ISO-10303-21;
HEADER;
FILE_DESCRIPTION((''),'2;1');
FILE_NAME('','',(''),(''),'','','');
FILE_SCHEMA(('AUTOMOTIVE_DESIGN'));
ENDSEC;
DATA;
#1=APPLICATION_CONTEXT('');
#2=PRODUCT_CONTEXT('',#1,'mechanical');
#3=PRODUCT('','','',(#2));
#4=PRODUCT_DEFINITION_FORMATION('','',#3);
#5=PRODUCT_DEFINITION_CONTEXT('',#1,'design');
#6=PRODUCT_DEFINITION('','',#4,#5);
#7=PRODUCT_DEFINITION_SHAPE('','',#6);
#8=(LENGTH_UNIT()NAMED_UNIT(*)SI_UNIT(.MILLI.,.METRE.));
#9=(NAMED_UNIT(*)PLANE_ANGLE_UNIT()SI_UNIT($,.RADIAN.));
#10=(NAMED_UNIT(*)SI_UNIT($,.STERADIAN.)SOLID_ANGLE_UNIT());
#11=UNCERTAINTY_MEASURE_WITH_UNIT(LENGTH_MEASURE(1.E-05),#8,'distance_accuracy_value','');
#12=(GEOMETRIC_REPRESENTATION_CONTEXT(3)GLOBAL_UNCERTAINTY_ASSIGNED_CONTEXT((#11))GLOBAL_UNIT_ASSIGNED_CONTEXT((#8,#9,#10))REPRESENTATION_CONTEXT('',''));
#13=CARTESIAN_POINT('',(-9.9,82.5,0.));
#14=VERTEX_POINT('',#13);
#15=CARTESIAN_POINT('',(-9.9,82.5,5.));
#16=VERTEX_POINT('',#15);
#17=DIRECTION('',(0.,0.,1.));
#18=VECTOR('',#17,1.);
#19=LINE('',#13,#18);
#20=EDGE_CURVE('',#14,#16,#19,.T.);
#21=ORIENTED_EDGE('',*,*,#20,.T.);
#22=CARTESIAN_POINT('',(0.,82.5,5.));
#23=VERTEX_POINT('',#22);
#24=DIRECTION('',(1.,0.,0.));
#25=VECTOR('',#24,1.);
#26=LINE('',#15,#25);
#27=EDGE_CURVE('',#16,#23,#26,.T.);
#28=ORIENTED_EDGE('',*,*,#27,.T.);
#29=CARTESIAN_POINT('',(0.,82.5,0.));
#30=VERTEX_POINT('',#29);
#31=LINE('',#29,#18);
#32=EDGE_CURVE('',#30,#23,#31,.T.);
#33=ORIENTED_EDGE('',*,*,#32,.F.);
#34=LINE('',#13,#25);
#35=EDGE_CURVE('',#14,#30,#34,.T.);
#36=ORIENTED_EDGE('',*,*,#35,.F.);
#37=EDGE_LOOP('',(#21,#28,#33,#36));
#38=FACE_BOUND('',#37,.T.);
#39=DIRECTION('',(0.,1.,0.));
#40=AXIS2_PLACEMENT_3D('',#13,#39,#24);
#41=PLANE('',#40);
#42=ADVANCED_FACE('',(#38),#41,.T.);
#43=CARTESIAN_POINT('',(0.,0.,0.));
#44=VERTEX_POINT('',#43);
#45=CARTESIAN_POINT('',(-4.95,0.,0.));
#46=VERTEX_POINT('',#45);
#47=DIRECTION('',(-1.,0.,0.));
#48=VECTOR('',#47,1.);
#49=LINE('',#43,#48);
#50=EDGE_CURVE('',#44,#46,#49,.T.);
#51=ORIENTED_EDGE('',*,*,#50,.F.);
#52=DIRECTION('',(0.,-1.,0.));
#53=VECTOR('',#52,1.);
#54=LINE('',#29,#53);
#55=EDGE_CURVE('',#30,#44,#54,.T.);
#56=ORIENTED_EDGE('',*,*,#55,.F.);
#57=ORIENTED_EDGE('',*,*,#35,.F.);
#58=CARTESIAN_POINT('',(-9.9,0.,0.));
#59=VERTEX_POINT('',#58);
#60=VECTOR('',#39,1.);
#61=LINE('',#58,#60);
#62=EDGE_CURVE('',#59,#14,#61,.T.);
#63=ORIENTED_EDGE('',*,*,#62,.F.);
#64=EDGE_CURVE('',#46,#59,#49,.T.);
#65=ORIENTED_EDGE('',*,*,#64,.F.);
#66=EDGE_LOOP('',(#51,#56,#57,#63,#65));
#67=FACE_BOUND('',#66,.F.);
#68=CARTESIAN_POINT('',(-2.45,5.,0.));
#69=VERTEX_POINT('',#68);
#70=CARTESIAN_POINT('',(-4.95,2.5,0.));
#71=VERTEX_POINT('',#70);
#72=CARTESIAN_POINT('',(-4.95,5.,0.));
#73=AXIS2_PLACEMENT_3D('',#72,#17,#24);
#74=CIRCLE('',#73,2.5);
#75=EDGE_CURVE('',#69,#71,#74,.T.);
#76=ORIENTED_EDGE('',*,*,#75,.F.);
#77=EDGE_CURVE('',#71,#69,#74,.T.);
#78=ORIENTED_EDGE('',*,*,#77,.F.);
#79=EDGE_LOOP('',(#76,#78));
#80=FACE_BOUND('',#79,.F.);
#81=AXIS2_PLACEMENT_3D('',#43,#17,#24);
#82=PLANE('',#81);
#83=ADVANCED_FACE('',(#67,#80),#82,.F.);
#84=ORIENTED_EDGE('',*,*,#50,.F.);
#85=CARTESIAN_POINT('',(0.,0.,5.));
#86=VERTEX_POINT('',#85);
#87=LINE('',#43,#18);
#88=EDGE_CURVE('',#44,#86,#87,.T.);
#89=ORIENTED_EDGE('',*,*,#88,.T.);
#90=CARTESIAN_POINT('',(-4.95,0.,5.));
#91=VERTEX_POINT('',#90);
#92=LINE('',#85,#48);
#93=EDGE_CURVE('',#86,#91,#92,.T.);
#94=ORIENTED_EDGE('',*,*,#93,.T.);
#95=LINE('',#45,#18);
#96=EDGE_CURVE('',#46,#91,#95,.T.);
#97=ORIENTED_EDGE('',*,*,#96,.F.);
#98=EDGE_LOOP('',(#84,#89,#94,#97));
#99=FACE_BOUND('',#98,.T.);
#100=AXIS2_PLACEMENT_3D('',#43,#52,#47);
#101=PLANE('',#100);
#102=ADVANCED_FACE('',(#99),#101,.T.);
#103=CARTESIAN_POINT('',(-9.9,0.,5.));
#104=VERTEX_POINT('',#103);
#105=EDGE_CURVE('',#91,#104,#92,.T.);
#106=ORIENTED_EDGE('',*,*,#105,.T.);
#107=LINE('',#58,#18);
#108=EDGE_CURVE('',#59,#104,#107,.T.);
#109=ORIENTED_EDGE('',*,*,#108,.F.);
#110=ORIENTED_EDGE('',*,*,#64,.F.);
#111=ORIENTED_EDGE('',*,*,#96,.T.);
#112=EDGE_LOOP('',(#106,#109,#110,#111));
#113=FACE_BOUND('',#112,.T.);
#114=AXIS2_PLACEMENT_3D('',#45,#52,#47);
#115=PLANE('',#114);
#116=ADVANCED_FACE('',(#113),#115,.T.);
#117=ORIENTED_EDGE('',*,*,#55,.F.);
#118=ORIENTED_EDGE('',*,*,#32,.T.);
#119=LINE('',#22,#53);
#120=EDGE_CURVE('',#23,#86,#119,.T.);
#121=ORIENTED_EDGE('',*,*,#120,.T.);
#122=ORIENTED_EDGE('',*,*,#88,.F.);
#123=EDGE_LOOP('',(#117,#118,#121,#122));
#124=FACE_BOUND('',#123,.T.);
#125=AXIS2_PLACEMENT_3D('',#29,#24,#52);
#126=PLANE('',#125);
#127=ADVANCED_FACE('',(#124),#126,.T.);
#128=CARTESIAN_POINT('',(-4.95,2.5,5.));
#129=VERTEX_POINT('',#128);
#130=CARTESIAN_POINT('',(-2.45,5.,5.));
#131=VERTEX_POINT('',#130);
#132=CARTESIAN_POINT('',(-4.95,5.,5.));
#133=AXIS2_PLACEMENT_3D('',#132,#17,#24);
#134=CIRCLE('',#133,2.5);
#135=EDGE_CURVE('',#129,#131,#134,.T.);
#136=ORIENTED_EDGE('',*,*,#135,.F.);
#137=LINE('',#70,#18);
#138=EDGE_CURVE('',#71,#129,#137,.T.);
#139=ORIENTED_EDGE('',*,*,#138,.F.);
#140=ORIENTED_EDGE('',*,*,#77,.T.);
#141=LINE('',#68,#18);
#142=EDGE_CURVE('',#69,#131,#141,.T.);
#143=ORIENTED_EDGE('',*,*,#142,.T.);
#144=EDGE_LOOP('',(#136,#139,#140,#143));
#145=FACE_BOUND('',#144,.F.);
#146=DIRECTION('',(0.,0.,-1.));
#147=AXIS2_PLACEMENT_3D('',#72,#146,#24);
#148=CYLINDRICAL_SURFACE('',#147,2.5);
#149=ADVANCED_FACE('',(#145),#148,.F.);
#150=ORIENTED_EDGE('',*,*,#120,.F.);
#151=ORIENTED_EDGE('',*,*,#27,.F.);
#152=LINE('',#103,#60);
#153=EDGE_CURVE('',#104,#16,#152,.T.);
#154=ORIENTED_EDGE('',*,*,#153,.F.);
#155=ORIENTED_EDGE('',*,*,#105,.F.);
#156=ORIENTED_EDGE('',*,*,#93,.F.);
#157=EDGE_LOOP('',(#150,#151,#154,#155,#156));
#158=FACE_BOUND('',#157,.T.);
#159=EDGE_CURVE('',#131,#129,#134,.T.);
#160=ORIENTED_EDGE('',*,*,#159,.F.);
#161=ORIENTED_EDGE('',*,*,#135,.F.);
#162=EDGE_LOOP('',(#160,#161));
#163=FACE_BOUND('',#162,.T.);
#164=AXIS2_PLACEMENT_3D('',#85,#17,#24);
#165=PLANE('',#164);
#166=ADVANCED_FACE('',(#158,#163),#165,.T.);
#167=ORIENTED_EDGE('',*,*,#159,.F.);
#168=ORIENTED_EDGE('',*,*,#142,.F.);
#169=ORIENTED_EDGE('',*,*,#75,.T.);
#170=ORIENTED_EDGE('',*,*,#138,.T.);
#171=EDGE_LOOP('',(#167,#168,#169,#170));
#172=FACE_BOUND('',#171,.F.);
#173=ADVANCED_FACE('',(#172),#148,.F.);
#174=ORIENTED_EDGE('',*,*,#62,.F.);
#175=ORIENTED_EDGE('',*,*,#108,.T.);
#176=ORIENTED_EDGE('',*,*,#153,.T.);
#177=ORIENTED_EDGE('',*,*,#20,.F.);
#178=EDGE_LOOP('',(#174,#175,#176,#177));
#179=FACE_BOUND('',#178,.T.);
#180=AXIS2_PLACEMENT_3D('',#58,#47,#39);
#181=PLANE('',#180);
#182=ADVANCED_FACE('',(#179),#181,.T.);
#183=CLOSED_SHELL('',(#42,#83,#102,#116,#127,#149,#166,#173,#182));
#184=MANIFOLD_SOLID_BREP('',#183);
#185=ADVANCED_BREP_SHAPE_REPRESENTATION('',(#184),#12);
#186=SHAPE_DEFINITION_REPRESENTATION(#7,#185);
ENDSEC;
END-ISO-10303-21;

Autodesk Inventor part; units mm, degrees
ref_plane "YZ Plane" through (0, 0, 0) normal (1, 0, 0) x (0, 1, 0)
ref_plane "XZ Plane" through (0, 0, 0) normal (0, 1, 0) x (-1, 0, 0)
ref_plane "XY Plane" through (0, 0, 0) normal (0, 0, 1) x (1, 0, 0)
sketch "Sketch2" plane through (0, 0, 0) normal (0, 0, 1) x (1, 0, 0)
  line L0 (0, 0) -> (-9.9, 0)
  line L1 (-4.95, 0) -> (-4.95, 2.5)
  line L2 (-4.95, 0) -> (-2.45, 0) construction
  circle A0 centre (-4.95, 5) radius 2.5
  line L3 (-4.95, 7.5) -> (32.05, 7.5) construction
  line L4 (0, 0) -> (-9.9, 0)
  line L5 (0, 0) -> (-9.9, 0)
  line L6 (-4.95, 7.5) -> (66.05, 7.5) construction
  line L7 (-4.95, 7.5) -> (70.05, 7.5) construction
  line L8 (0, 0) -> (-9.9, 0)
  line L9 (-9.9, 0) -> (-9.9, 82.5)
  line L10 (-9.9, 82.5) -> (0, 82.5)
  line L11 (0, 82.5) -> (0, 0)
  dimension "d35" = 5
  dimension "d33" = 2.5
  dimension "d34" = 90
  dimension "d48" = 9.9
extrude "Extrusion6" add sketch "Sketch2" along normal blind 5
properties part number "Cube_Holder_SB_V1_(71mm)"
